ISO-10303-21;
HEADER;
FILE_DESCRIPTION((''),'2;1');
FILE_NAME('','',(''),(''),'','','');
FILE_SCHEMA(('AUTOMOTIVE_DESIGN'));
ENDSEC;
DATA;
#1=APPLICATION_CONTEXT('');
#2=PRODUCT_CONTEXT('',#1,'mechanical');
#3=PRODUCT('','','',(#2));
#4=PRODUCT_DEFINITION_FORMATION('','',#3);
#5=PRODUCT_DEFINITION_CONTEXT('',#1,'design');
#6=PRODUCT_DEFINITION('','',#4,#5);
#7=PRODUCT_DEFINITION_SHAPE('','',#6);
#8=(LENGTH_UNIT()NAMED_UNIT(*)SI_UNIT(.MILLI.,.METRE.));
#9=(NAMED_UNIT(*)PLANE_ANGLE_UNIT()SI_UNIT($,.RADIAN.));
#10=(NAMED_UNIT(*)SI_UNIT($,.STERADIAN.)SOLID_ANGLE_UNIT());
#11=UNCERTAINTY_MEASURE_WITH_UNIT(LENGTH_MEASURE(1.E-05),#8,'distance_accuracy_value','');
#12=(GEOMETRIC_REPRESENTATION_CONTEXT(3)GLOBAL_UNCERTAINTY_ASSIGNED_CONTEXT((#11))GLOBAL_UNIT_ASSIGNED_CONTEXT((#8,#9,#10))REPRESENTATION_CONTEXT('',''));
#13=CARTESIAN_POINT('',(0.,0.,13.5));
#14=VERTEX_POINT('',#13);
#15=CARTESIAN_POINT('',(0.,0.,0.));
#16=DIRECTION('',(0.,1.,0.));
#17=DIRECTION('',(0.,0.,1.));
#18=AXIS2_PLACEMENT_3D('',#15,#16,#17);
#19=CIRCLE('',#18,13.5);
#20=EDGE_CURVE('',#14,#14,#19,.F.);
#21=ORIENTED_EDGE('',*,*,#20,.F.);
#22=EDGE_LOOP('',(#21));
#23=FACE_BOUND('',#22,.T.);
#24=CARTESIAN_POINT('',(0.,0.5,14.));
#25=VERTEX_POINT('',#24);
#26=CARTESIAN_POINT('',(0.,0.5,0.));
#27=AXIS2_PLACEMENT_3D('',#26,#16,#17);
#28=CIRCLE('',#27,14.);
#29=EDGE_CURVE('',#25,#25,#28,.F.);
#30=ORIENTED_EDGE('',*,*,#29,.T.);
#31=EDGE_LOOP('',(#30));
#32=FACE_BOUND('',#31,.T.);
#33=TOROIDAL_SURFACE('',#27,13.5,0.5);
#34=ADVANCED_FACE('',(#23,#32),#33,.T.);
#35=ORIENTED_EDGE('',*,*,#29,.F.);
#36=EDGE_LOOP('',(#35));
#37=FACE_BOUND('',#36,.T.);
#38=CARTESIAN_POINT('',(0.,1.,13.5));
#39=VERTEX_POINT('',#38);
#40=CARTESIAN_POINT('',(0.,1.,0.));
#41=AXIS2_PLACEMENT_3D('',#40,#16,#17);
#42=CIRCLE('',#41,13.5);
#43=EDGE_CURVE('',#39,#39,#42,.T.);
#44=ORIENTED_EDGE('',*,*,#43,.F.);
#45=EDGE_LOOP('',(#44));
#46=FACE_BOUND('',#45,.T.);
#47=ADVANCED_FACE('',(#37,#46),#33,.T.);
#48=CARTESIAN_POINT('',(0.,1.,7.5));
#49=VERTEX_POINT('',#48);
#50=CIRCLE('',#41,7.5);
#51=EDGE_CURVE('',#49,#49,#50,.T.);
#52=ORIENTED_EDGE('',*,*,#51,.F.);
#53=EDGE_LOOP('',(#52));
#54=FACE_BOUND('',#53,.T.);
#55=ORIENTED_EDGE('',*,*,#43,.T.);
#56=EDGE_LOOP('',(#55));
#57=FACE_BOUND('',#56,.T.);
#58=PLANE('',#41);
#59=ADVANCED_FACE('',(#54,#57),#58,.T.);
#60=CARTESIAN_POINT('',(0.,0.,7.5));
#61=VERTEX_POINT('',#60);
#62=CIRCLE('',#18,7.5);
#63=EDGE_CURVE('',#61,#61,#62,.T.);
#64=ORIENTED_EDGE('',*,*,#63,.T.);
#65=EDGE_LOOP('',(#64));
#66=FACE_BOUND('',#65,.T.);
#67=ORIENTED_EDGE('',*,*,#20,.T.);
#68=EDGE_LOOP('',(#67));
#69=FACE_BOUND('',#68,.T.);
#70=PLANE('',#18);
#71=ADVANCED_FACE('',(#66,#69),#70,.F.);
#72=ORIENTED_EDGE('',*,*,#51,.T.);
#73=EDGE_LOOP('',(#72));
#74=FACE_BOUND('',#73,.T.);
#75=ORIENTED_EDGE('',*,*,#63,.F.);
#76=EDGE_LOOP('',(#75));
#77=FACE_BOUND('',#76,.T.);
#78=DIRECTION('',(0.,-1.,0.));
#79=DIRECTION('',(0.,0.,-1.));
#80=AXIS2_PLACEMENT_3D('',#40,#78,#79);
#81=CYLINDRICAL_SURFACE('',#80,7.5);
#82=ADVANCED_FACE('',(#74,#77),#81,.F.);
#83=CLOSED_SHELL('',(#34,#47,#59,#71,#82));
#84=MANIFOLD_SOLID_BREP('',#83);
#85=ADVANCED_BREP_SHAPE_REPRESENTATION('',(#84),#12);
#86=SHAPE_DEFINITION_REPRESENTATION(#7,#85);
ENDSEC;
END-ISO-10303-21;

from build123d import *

# Parameters (mm, degrees)
SKETCH1_R           = 14
SKETCH1_R_2         = 7.5
BOSS_EXTRUDE1_DEPTH = 1
FILLET1_R           = 0.5


with BuildPart() as part:
    # Sketch1 → Boss-Extrude1 (new body)
    with BuildSketch(Plane(origin=(0, 0, 0), x_dir=(1, 0, 0), z_dir=(0, 1, 0))):
        with Locations(Location((0, 0, 0), (0, 0, 270))):
            Circle(SKETCH1_R)
        with Locations(Location((0, 0, 0), (0, 0, 270))):
            Circle(SKETCH1_R_2, mode=Mode.SUBTRACT)
    extrude(amount=BOSS_EXTRUDE1_DEPTH)

    # Fillet1
    fillet1_edges = [part.edges().sort_by_distance(p)[0] for p in [
        (0, 0, -14),
        (0, 1, -14),
    ]]
    fillet(fillet1_edges, radius=FILLET1_R - 0.0001)  # a hair under: the kernel refuses the full size


solid = part.part
